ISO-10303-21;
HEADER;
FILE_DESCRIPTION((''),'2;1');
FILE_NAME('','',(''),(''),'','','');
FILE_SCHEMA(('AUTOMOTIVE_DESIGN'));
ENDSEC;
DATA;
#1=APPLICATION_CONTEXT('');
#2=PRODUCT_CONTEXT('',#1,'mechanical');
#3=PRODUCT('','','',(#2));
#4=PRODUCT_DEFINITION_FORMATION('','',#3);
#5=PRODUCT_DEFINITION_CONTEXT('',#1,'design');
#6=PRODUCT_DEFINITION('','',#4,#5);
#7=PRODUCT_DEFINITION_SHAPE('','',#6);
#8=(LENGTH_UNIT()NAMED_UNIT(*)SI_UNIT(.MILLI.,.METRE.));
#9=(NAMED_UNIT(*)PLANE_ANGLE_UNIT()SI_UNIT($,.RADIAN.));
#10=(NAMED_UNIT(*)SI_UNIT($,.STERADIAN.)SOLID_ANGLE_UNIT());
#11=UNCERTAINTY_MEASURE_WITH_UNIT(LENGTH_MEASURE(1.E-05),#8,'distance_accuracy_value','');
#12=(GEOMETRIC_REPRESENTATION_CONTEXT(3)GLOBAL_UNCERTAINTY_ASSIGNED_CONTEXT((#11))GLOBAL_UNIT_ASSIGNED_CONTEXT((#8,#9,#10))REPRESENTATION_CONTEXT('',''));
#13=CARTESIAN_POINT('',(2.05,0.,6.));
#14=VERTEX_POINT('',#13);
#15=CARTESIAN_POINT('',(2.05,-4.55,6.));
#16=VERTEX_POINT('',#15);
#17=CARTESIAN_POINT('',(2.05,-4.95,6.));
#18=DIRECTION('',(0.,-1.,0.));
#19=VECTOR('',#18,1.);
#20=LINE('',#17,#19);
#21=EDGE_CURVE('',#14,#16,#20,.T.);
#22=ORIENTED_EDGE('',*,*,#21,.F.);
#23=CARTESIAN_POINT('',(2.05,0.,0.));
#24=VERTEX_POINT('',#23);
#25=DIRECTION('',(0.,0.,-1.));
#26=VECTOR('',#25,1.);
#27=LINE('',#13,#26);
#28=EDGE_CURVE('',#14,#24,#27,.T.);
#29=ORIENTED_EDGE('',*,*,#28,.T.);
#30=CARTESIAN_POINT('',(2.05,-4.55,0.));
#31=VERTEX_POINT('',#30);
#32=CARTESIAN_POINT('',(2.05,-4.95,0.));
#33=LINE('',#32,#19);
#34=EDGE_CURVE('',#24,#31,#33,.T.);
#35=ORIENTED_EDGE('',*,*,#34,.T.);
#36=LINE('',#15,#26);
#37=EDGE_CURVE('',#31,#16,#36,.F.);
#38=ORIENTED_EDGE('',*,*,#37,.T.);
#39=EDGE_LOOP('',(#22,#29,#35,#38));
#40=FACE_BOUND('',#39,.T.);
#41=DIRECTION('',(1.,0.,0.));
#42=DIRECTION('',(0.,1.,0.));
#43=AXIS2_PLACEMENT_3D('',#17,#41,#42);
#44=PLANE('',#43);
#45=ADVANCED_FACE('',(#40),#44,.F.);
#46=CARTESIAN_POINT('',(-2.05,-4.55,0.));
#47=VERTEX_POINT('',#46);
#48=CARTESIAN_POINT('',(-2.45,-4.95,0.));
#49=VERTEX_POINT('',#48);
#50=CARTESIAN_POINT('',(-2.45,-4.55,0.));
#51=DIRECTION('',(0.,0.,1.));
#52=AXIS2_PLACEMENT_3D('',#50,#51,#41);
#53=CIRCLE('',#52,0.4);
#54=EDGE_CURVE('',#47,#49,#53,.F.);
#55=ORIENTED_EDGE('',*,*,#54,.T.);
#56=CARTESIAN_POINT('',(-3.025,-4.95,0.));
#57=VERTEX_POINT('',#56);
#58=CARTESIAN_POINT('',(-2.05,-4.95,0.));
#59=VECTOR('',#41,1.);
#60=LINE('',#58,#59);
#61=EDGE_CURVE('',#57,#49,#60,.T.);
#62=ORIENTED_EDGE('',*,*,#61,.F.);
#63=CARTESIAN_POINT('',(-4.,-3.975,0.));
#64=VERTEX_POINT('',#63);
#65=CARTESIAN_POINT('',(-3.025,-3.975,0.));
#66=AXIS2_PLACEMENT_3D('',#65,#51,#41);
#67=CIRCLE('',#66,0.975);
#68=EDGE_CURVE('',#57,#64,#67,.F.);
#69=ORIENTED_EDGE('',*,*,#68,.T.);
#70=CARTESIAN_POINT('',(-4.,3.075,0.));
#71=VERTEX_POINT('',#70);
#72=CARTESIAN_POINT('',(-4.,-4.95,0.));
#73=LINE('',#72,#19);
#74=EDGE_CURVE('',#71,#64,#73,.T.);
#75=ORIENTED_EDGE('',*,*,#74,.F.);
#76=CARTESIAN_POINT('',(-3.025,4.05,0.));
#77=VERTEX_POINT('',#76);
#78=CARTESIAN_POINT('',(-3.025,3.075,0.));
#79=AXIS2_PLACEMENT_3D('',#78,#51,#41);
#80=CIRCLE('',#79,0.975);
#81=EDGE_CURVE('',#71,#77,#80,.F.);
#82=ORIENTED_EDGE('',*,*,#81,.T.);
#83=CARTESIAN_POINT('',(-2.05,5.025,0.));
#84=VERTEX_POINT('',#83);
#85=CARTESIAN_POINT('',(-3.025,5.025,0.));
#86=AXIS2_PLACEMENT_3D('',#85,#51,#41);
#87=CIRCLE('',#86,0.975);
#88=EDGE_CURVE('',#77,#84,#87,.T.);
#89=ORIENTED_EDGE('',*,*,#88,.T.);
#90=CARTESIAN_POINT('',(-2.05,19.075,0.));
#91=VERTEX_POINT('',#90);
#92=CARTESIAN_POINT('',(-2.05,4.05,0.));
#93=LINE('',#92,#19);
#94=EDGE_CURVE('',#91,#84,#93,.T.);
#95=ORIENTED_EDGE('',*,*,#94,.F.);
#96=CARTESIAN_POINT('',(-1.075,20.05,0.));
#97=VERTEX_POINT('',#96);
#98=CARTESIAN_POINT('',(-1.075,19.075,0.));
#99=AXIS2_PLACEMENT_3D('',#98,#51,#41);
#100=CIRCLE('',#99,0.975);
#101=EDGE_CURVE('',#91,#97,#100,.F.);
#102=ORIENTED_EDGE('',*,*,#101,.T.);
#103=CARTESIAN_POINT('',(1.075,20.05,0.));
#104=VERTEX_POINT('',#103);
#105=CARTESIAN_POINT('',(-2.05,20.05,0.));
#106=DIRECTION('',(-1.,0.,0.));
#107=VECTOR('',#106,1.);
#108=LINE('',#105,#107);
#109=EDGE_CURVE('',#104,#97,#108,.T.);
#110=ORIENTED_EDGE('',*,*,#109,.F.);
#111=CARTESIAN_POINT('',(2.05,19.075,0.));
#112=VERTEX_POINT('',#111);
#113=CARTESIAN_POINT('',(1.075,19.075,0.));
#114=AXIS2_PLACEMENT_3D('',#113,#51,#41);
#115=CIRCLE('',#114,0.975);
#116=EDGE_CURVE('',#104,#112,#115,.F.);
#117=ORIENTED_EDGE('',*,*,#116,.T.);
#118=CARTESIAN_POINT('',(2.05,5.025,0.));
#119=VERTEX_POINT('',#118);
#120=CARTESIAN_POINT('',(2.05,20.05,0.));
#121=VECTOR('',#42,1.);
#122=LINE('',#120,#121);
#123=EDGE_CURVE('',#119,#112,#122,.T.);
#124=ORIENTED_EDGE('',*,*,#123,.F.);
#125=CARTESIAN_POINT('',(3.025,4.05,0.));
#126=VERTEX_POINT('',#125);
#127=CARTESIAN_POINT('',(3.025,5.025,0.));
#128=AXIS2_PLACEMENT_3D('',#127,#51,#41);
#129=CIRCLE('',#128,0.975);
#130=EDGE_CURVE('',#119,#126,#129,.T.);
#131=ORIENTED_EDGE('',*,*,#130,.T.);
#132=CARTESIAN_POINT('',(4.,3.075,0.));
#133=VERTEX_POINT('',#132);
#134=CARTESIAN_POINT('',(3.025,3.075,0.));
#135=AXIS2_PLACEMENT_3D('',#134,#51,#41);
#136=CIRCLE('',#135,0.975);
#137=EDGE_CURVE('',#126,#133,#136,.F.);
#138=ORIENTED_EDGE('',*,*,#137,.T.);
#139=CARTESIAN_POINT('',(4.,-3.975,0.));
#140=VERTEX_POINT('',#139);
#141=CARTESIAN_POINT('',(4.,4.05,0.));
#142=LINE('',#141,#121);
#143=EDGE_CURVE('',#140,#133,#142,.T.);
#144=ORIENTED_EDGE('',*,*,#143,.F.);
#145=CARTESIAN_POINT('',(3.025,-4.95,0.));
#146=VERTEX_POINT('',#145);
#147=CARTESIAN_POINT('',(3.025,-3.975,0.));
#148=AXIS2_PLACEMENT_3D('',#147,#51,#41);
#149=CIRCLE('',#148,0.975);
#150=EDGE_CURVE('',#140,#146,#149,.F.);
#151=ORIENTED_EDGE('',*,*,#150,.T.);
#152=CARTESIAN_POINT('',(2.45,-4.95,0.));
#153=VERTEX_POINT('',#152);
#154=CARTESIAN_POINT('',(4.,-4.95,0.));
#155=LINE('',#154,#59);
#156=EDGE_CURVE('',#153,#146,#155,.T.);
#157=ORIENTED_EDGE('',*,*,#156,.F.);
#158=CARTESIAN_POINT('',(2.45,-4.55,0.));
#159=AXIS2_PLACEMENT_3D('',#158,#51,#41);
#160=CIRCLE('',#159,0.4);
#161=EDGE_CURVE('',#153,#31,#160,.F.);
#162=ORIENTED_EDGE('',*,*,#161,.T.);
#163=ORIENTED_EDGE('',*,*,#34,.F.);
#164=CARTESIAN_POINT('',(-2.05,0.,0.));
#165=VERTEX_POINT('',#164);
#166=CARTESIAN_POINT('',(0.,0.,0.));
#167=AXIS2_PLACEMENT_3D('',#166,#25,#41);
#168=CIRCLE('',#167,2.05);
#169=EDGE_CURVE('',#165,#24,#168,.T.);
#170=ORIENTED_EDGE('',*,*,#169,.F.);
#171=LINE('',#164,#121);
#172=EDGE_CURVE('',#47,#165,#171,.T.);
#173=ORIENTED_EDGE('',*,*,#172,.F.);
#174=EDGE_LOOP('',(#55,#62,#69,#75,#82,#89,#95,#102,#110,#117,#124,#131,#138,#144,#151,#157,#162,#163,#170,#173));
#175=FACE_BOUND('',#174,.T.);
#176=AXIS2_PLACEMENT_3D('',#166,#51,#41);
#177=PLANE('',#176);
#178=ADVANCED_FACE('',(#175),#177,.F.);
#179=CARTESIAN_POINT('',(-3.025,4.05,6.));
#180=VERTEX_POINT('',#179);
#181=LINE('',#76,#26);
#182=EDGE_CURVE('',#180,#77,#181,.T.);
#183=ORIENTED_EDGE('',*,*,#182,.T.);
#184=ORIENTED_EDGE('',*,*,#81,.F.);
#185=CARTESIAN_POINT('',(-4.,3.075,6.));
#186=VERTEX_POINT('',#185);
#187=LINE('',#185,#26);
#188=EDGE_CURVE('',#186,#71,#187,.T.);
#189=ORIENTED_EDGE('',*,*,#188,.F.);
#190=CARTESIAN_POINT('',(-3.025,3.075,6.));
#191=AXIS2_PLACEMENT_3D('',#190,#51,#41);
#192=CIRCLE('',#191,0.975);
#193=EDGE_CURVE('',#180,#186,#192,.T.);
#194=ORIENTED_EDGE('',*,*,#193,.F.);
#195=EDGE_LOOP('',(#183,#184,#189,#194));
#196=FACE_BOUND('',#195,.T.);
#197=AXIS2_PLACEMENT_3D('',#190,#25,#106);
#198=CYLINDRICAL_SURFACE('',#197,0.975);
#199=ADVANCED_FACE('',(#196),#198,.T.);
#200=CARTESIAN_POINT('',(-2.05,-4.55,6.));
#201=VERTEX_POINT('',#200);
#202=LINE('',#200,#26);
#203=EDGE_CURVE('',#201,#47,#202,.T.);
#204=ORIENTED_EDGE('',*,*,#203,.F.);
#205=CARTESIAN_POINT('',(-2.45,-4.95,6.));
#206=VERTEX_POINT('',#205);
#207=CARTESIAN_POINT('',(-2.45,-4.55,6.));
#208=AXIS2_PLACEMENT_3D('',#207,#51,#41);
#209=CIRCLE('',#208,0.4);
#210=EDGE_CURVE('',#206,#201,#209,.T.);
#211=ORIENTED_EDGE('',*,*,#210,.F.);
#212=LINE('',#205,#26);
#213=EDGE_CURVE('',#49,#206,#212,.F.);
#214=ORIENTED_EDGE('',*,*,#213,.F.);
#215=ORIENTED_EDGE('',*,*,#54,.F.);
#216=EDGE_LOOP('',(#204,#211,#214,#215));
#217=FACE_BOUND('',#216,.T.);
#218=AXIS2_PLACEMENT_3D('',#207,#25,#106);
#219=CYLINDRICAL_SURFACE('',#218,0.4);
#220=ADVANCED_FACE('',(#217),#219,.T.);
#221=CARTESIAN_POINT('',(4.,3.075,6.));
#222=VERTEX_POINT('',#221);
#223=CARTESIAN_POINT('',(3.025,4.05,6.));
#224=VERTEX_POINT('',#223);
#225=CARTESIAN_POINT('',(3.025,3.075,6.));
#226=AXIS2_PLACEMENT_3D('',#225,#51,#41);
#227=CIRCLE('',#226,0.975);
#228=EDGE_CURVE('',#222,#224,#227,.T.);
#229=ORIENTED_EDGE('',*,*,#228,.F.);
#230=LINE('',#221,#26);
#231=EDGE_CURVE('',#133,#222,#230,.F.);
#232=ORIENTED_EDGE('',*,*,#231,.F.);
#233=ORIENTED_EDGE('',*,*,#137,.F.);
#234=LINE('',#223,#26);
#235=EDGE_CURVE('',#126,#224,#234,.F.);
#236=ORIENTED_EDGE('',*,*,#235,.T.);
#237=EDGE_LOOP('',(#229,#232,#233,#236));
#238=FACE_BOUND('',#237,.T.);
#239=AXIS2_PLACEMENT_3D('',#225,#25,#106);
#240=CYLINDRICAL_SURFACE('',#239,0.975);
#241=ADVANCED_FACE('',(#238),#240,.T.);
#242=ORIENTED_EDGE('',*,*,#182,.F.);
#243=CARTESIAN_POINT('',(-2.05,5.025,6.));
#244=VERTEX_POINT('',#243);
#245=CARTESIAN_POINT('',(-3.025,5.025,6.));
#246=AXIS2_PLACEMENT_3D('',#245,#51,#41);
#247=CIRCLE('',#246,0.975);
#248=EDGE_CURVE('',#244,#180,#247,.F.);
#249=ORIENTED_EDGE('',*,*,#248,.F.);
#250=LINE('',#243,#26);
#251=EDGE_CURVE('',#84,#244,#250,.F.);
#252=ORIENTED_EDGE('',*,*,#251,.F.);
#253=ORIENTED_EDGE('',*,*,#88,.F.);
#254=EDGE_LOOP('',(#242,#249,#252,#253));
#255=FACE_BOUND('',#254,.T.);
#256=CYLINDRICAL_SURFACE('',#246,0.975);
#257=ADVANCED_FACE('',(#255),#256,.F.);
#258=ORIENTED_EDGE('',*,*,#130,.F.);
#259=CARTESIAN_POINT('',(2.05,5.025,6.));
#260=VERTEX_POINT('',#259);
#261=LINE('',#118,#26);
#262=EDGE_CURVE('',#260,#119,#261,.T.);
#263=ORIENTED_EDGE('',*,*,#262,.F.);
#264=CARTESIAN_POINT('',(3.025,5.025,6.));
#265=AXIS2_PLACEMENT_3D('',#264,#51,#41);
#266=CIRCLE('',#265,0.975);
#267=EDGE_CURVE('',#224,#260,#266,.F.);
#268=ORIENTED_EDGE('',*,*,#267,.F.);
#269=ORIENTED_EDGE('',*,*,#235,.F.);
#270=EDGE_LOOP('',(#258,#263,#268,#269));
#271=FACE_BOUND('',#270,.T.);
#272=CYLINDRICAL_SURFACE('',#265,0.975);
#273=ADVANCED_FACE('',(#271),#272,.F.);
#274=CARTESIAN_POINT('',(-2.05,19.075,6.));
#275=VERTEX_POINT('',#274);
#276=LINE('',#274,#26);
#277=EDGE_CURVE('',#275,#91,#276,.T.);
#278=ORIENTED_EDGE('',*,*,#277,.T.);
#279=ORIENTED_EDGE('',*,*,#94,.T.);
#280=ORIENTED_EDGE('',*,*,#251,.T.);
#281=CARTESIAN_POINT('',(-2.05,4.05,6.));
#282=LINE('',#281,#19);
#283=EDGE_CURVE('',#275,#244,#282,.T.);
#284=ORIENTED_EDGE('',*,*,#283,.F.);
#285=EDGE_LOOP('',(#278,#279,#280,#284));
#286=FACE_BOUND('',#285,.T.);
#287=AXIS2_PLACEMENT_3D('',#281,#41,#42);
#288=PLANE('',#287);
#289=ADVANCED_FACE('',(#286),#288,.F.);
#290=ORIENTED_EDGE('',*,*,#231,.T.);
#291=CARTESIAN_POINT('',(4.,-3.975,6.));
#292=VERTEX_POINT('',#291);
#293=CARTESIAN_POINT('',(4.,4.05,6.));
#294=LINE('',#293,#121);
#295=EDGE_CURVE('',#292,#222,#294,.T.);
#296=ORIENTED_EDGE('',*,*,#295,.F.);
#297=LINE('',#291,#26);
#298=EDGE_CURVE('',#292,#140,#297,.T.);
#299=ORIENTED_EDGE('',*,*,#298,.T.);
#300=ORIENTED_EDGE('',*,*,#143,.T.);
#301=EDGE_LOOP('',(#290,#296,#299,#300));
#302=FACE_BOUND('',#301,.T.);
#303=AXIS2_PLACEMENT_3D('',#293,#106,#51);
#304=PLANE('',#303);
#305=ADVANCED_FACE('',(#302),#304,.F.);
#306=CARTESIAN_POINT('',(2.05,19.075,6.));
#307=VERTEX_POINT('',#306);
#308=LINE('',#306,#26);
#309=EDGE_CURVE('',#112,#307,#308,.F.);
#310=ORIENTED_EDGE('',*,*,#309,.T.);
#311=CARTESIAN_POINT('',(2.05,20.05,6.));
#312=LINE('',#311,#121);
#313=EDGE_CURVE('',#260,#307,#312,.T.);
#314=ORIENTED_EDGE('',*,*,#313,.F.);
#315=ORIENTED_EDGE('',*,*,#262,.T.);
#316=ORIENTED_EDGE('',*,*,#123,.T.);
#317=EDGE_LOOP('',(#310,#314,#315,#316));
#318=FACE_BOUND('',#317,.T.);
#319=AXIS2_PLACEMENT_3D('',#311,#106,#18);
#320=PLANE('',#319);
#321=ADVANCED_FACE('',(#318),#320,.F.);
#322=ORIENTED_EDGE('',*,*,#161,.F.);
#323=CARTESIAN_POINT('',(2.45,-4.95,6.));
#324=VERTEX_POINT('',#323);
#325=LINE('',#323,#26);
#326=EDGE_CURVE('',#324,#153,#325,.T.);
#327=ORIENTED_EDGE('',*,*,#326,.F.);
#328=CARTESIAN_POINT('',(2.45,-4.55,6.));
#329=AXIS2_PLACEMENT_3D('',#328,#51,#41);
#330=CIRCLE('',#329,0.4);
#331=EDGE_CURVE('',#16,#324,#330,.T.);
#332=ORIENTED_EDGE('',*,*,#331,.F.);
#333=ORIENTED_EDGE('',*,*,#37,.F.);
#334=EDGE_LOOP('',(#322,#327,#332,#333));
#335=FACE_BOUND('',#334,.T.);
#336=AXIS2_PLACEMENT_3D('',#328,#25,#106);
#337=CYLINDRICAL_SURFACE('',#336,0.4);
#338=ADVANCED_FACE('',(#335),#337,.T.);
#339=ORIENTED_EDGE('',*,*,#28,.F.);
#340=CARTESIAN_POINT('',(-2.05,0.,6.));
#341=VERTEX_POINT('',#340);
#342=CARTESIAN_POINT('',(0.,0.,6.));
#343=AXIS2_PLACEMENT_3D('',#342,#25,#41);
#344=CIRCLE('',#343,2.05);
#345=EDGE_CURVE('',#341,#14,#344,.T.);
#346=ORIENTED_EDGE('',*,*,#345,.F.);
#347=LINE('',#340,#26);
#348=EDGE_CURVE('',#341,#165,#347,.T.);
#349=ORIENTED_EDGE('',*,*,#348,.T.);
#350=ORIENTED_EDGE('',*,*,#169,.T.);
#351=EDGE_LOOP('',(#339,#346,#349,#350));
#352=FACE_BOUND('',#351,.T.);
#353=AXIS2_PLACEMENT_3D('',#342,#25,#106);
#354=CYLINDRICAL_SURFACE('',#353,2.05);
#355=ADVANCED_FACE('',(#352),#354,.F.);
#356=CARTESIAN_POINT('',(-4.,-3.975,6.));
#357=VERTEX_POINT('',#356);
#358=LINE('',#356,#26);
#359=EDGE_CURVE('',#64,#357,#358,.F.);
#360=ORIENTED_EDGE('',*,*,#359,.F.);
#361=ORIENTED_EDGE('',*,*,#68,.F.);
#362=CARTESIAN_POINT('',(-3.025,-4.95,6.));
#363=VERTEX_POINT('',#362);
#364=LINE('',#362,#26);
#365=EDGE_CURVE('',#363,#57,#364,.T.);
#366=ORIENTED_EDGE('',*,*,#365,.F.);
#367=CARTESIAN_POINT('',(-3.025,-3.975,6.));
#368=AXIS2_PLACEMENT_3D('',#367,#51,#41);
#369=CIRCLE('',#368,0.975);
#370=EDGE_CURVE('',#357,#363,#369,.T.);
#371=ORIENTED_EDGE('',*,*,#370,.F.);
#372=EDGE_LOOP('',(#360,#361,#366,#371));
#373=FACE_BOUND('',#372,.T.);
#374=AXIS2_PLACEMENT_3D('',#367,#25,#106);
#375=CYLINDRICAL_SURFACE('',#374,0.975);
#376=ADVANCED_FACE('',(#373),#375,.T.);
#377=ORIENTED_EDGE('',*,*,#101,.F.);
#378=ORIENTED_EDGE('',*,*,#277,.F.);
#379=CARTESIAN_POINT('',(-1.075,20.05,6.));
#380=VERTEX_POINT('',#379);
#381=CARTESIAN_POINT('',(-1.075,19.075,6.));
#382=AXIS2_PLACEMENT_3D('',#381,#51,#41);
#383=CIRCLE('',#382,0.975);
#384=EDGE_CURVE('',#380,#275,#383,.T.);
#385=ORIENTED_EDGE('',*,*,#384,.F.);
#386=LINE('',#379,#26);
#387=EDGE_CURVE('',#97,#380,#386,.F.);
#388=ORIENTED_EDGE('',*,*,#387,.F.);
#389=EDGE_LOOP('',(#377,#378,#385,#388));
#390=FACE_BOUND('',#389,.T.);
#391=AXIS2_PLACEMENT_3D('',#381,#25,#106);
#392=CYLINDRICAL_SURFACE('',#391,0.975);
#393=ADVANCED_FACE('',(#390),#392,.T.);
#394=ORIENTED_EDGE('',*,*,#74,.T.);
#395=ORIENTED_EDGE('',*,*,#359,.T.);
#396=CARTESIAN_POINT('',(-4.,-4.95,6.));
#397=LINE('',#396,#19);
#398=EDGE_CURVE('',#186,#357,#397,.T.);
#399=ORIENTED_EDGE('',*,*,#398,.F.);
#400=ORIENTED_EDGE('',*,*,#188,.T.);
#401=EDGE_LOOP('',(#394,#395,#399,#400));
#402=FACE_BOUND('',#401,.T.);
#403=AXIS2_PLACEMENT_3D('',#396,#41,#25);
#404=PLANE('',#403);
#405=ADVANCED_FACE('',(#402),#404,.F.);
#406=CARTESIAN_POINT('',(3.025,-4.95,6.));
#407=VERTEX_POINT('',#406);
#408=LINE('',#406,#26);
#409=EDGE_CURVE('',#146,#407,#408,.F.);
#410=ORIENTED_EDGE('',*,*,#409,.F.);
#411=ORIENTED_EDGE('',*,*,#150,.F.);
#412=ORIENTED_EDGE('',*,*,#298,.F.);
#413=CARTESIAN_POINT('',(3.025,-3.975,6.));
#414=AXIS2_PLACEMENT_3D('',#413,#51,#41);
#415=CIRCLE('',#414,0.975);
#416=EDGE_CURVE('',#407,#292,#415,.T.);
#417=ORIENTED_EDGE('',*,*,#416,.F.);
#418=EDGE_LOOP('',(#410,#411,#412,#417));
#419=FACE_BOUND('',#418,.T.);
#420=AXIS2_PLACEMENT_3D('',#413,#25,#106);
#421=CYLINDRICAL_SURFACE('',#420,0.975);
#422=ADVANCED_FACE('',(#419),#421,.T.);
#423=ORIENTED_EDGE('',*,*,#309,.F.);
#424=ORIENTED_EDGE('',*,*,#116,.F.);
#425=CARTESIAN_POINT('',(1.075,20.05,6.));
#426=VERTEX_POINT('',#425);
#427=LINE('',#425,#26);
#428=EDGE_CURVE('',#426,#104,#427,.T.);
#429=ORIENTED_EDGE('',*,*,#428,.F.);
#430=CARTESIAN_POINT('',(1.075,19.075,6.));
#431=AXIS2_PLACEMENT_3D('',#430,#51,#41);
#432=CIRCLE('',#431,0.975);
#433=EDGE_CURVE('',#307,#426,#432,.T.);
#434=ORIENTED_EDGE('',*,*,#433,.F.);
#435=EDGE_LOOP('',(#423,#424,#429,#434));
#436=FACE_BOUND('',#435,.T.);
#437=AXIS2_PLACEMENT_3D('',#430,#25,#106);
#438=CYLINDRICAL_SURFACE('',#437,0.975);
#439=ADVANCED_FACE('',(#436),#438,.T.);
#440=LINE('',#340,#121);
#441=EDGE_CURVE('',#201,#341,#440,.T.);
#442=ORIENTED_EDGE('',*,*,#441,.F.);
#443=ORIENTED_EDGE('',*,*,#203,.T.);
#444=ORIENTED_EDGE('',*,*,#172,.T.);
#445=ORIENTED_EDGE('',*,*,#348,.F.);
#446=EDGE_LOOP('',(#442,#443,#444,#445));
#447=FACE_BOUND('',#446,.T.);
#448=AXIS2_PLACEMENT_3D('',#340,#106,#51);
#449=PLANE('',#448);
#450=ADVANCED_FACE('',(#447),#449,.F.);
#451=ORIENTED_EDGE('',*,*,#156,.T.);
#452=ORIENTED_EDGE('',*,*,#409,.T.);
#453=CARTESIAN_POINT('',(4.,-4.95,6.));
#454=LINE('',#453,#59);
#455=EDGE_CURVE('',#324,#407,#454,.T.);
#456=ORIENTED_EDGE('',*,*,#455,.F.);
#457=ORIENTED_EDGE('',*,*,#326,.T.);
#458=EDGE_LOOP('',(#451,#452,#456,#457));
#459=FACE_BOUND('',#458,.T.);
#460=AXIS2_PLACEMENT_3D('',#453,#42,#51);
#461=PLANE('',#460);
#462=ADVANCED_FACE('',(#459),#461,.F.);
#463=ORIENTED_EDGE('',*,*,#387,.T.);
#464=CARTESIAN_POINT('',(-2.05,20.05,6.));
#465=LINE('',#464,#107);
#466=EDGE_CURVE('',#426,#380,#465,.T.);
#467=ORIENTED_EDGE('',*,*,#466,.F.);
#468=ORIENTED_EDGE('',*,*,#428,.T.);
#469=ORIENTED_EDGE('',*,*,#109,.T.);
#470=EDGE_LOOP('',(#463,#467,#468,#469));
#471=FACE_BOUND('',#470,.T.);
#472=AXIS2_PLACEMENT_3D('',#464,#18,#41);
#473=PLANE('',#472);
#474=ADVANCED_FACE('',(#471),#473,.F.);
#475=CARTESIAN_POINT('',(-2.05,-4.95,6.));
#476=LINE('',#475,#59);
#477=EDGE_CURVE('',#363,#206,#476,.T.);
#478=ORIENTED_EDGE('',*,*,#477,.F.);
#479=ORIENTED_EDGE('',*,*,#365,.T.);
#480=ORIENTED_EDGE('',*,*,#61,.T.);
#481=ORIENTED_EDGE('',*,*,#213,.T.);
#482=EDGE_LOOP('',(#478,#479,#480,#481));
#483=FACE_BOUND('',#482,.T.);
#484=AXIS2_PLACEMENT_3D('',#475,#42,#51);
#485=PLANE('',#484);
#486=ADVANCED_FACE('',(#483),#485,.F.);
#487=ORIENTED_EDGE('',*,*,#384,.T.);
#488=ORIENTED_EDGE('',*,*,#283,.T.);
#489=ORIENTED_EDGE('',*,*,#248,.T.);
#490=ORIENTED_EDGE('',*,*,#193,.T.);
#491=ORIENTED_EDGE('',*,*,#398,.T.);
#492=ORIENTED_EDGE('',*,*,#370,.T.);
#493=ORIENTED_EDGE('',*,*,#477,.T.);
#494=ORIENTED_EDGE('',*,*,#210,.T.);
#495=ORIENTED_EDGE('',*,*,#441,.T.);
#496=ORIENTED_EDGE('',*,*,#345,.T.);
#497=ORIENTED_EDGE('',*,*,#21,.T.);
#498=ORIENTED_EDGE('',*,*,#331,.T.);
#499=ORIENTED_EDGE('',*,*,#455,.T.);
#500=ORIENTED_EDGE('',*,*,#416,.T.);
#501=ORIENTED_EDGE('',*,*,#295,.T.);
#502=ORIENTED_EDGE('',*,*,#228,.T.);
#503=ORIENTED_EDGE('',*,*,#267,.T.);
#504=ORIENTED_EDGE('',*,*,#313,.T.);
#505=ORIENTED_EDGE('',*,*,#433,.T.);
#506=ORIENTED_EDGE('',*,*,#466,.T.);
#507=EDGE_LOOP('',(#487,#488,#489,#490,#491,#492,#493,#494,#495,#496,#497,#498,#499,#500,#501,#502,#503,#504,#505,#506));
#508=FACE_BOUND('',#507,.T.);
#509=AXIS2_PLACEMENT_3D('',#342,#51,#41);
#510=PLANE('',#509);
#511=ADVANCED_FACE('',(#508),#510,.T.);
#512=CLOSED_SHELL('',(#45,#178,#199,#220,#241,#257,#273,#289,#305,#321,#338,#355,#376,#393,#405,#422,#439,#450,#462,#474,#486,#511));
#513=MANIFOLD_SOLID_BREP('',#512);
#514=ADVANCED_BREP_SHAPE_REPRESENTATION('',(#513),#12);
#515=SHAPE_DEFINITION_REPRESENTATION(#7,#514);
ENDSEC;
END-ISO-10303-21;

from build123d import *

# Parameters (mm, degrees)
BOSS_EXTRUDE1_DEPTH = 6
FILLET1_R           = 0.975
FILLET2_R           = 0.4


with BuildPart() as part:
    # Sketch1 → Boss-Extrude1 (new body)
    with BuildSketch(Plane.XY):
        with BuildLine():
            Line((-4, -4.95), (-4, 4.05))
            Line((-4, 4.05), (-2.05, 4.05))
            Line((-2.05, 4.05), (-2.05, 20.05))
            Line((-2.05, 20.05), (2.05, 20.05))
            Line((2.05, 20.05), (2.05, 4.05))
            Line((2.05, 4.05), (4, 4.05))
            Line((4, 4.05), (4, -4.95))
            Line((4, -4.95), (2.05, -4.95))
            Line((2.05, -4.95), (2.05, 0))
            ThreePointArc((2.05, 0), (0, 2.05), (-2.05, 0))
            Line((-2.05, 0), (-2.05, -4.95))
            Line((-2.05, -4.95), (-4, -4.95))
        make_face()
    extrude(amount=BOSS_EXTRUDE1_DEPTH)

    # Fillet1
    fillet1_edges = [part.edges().sort_by_distance(p)[0] for p in [
        (-4, -4.95, 3),
        (-4, 4.05, 3),
        (-2.05, 4.05, 3),
        (4, 4.05, 3),
        (4, -4.95, 3),
        (2.05, 4.05, 3),
        (-2.05, 20.05, 3),
        (2.05, 20.05, 3),
    ]]
    fillet(fillet1_edges, radius=FILLET1_R - 0.0001)  # a hair under: the kernel refuses the full size

    # Fillet2
    fillet2_edges = [part.edges().sort_by_distance(p)[0] for p in [
        (2.05, -4.95, 3),
        (-2.05, -4.95, 3),
    ]]
    fillet(fillet2_edges, radius=FILLET2_R)


solid = part.part
